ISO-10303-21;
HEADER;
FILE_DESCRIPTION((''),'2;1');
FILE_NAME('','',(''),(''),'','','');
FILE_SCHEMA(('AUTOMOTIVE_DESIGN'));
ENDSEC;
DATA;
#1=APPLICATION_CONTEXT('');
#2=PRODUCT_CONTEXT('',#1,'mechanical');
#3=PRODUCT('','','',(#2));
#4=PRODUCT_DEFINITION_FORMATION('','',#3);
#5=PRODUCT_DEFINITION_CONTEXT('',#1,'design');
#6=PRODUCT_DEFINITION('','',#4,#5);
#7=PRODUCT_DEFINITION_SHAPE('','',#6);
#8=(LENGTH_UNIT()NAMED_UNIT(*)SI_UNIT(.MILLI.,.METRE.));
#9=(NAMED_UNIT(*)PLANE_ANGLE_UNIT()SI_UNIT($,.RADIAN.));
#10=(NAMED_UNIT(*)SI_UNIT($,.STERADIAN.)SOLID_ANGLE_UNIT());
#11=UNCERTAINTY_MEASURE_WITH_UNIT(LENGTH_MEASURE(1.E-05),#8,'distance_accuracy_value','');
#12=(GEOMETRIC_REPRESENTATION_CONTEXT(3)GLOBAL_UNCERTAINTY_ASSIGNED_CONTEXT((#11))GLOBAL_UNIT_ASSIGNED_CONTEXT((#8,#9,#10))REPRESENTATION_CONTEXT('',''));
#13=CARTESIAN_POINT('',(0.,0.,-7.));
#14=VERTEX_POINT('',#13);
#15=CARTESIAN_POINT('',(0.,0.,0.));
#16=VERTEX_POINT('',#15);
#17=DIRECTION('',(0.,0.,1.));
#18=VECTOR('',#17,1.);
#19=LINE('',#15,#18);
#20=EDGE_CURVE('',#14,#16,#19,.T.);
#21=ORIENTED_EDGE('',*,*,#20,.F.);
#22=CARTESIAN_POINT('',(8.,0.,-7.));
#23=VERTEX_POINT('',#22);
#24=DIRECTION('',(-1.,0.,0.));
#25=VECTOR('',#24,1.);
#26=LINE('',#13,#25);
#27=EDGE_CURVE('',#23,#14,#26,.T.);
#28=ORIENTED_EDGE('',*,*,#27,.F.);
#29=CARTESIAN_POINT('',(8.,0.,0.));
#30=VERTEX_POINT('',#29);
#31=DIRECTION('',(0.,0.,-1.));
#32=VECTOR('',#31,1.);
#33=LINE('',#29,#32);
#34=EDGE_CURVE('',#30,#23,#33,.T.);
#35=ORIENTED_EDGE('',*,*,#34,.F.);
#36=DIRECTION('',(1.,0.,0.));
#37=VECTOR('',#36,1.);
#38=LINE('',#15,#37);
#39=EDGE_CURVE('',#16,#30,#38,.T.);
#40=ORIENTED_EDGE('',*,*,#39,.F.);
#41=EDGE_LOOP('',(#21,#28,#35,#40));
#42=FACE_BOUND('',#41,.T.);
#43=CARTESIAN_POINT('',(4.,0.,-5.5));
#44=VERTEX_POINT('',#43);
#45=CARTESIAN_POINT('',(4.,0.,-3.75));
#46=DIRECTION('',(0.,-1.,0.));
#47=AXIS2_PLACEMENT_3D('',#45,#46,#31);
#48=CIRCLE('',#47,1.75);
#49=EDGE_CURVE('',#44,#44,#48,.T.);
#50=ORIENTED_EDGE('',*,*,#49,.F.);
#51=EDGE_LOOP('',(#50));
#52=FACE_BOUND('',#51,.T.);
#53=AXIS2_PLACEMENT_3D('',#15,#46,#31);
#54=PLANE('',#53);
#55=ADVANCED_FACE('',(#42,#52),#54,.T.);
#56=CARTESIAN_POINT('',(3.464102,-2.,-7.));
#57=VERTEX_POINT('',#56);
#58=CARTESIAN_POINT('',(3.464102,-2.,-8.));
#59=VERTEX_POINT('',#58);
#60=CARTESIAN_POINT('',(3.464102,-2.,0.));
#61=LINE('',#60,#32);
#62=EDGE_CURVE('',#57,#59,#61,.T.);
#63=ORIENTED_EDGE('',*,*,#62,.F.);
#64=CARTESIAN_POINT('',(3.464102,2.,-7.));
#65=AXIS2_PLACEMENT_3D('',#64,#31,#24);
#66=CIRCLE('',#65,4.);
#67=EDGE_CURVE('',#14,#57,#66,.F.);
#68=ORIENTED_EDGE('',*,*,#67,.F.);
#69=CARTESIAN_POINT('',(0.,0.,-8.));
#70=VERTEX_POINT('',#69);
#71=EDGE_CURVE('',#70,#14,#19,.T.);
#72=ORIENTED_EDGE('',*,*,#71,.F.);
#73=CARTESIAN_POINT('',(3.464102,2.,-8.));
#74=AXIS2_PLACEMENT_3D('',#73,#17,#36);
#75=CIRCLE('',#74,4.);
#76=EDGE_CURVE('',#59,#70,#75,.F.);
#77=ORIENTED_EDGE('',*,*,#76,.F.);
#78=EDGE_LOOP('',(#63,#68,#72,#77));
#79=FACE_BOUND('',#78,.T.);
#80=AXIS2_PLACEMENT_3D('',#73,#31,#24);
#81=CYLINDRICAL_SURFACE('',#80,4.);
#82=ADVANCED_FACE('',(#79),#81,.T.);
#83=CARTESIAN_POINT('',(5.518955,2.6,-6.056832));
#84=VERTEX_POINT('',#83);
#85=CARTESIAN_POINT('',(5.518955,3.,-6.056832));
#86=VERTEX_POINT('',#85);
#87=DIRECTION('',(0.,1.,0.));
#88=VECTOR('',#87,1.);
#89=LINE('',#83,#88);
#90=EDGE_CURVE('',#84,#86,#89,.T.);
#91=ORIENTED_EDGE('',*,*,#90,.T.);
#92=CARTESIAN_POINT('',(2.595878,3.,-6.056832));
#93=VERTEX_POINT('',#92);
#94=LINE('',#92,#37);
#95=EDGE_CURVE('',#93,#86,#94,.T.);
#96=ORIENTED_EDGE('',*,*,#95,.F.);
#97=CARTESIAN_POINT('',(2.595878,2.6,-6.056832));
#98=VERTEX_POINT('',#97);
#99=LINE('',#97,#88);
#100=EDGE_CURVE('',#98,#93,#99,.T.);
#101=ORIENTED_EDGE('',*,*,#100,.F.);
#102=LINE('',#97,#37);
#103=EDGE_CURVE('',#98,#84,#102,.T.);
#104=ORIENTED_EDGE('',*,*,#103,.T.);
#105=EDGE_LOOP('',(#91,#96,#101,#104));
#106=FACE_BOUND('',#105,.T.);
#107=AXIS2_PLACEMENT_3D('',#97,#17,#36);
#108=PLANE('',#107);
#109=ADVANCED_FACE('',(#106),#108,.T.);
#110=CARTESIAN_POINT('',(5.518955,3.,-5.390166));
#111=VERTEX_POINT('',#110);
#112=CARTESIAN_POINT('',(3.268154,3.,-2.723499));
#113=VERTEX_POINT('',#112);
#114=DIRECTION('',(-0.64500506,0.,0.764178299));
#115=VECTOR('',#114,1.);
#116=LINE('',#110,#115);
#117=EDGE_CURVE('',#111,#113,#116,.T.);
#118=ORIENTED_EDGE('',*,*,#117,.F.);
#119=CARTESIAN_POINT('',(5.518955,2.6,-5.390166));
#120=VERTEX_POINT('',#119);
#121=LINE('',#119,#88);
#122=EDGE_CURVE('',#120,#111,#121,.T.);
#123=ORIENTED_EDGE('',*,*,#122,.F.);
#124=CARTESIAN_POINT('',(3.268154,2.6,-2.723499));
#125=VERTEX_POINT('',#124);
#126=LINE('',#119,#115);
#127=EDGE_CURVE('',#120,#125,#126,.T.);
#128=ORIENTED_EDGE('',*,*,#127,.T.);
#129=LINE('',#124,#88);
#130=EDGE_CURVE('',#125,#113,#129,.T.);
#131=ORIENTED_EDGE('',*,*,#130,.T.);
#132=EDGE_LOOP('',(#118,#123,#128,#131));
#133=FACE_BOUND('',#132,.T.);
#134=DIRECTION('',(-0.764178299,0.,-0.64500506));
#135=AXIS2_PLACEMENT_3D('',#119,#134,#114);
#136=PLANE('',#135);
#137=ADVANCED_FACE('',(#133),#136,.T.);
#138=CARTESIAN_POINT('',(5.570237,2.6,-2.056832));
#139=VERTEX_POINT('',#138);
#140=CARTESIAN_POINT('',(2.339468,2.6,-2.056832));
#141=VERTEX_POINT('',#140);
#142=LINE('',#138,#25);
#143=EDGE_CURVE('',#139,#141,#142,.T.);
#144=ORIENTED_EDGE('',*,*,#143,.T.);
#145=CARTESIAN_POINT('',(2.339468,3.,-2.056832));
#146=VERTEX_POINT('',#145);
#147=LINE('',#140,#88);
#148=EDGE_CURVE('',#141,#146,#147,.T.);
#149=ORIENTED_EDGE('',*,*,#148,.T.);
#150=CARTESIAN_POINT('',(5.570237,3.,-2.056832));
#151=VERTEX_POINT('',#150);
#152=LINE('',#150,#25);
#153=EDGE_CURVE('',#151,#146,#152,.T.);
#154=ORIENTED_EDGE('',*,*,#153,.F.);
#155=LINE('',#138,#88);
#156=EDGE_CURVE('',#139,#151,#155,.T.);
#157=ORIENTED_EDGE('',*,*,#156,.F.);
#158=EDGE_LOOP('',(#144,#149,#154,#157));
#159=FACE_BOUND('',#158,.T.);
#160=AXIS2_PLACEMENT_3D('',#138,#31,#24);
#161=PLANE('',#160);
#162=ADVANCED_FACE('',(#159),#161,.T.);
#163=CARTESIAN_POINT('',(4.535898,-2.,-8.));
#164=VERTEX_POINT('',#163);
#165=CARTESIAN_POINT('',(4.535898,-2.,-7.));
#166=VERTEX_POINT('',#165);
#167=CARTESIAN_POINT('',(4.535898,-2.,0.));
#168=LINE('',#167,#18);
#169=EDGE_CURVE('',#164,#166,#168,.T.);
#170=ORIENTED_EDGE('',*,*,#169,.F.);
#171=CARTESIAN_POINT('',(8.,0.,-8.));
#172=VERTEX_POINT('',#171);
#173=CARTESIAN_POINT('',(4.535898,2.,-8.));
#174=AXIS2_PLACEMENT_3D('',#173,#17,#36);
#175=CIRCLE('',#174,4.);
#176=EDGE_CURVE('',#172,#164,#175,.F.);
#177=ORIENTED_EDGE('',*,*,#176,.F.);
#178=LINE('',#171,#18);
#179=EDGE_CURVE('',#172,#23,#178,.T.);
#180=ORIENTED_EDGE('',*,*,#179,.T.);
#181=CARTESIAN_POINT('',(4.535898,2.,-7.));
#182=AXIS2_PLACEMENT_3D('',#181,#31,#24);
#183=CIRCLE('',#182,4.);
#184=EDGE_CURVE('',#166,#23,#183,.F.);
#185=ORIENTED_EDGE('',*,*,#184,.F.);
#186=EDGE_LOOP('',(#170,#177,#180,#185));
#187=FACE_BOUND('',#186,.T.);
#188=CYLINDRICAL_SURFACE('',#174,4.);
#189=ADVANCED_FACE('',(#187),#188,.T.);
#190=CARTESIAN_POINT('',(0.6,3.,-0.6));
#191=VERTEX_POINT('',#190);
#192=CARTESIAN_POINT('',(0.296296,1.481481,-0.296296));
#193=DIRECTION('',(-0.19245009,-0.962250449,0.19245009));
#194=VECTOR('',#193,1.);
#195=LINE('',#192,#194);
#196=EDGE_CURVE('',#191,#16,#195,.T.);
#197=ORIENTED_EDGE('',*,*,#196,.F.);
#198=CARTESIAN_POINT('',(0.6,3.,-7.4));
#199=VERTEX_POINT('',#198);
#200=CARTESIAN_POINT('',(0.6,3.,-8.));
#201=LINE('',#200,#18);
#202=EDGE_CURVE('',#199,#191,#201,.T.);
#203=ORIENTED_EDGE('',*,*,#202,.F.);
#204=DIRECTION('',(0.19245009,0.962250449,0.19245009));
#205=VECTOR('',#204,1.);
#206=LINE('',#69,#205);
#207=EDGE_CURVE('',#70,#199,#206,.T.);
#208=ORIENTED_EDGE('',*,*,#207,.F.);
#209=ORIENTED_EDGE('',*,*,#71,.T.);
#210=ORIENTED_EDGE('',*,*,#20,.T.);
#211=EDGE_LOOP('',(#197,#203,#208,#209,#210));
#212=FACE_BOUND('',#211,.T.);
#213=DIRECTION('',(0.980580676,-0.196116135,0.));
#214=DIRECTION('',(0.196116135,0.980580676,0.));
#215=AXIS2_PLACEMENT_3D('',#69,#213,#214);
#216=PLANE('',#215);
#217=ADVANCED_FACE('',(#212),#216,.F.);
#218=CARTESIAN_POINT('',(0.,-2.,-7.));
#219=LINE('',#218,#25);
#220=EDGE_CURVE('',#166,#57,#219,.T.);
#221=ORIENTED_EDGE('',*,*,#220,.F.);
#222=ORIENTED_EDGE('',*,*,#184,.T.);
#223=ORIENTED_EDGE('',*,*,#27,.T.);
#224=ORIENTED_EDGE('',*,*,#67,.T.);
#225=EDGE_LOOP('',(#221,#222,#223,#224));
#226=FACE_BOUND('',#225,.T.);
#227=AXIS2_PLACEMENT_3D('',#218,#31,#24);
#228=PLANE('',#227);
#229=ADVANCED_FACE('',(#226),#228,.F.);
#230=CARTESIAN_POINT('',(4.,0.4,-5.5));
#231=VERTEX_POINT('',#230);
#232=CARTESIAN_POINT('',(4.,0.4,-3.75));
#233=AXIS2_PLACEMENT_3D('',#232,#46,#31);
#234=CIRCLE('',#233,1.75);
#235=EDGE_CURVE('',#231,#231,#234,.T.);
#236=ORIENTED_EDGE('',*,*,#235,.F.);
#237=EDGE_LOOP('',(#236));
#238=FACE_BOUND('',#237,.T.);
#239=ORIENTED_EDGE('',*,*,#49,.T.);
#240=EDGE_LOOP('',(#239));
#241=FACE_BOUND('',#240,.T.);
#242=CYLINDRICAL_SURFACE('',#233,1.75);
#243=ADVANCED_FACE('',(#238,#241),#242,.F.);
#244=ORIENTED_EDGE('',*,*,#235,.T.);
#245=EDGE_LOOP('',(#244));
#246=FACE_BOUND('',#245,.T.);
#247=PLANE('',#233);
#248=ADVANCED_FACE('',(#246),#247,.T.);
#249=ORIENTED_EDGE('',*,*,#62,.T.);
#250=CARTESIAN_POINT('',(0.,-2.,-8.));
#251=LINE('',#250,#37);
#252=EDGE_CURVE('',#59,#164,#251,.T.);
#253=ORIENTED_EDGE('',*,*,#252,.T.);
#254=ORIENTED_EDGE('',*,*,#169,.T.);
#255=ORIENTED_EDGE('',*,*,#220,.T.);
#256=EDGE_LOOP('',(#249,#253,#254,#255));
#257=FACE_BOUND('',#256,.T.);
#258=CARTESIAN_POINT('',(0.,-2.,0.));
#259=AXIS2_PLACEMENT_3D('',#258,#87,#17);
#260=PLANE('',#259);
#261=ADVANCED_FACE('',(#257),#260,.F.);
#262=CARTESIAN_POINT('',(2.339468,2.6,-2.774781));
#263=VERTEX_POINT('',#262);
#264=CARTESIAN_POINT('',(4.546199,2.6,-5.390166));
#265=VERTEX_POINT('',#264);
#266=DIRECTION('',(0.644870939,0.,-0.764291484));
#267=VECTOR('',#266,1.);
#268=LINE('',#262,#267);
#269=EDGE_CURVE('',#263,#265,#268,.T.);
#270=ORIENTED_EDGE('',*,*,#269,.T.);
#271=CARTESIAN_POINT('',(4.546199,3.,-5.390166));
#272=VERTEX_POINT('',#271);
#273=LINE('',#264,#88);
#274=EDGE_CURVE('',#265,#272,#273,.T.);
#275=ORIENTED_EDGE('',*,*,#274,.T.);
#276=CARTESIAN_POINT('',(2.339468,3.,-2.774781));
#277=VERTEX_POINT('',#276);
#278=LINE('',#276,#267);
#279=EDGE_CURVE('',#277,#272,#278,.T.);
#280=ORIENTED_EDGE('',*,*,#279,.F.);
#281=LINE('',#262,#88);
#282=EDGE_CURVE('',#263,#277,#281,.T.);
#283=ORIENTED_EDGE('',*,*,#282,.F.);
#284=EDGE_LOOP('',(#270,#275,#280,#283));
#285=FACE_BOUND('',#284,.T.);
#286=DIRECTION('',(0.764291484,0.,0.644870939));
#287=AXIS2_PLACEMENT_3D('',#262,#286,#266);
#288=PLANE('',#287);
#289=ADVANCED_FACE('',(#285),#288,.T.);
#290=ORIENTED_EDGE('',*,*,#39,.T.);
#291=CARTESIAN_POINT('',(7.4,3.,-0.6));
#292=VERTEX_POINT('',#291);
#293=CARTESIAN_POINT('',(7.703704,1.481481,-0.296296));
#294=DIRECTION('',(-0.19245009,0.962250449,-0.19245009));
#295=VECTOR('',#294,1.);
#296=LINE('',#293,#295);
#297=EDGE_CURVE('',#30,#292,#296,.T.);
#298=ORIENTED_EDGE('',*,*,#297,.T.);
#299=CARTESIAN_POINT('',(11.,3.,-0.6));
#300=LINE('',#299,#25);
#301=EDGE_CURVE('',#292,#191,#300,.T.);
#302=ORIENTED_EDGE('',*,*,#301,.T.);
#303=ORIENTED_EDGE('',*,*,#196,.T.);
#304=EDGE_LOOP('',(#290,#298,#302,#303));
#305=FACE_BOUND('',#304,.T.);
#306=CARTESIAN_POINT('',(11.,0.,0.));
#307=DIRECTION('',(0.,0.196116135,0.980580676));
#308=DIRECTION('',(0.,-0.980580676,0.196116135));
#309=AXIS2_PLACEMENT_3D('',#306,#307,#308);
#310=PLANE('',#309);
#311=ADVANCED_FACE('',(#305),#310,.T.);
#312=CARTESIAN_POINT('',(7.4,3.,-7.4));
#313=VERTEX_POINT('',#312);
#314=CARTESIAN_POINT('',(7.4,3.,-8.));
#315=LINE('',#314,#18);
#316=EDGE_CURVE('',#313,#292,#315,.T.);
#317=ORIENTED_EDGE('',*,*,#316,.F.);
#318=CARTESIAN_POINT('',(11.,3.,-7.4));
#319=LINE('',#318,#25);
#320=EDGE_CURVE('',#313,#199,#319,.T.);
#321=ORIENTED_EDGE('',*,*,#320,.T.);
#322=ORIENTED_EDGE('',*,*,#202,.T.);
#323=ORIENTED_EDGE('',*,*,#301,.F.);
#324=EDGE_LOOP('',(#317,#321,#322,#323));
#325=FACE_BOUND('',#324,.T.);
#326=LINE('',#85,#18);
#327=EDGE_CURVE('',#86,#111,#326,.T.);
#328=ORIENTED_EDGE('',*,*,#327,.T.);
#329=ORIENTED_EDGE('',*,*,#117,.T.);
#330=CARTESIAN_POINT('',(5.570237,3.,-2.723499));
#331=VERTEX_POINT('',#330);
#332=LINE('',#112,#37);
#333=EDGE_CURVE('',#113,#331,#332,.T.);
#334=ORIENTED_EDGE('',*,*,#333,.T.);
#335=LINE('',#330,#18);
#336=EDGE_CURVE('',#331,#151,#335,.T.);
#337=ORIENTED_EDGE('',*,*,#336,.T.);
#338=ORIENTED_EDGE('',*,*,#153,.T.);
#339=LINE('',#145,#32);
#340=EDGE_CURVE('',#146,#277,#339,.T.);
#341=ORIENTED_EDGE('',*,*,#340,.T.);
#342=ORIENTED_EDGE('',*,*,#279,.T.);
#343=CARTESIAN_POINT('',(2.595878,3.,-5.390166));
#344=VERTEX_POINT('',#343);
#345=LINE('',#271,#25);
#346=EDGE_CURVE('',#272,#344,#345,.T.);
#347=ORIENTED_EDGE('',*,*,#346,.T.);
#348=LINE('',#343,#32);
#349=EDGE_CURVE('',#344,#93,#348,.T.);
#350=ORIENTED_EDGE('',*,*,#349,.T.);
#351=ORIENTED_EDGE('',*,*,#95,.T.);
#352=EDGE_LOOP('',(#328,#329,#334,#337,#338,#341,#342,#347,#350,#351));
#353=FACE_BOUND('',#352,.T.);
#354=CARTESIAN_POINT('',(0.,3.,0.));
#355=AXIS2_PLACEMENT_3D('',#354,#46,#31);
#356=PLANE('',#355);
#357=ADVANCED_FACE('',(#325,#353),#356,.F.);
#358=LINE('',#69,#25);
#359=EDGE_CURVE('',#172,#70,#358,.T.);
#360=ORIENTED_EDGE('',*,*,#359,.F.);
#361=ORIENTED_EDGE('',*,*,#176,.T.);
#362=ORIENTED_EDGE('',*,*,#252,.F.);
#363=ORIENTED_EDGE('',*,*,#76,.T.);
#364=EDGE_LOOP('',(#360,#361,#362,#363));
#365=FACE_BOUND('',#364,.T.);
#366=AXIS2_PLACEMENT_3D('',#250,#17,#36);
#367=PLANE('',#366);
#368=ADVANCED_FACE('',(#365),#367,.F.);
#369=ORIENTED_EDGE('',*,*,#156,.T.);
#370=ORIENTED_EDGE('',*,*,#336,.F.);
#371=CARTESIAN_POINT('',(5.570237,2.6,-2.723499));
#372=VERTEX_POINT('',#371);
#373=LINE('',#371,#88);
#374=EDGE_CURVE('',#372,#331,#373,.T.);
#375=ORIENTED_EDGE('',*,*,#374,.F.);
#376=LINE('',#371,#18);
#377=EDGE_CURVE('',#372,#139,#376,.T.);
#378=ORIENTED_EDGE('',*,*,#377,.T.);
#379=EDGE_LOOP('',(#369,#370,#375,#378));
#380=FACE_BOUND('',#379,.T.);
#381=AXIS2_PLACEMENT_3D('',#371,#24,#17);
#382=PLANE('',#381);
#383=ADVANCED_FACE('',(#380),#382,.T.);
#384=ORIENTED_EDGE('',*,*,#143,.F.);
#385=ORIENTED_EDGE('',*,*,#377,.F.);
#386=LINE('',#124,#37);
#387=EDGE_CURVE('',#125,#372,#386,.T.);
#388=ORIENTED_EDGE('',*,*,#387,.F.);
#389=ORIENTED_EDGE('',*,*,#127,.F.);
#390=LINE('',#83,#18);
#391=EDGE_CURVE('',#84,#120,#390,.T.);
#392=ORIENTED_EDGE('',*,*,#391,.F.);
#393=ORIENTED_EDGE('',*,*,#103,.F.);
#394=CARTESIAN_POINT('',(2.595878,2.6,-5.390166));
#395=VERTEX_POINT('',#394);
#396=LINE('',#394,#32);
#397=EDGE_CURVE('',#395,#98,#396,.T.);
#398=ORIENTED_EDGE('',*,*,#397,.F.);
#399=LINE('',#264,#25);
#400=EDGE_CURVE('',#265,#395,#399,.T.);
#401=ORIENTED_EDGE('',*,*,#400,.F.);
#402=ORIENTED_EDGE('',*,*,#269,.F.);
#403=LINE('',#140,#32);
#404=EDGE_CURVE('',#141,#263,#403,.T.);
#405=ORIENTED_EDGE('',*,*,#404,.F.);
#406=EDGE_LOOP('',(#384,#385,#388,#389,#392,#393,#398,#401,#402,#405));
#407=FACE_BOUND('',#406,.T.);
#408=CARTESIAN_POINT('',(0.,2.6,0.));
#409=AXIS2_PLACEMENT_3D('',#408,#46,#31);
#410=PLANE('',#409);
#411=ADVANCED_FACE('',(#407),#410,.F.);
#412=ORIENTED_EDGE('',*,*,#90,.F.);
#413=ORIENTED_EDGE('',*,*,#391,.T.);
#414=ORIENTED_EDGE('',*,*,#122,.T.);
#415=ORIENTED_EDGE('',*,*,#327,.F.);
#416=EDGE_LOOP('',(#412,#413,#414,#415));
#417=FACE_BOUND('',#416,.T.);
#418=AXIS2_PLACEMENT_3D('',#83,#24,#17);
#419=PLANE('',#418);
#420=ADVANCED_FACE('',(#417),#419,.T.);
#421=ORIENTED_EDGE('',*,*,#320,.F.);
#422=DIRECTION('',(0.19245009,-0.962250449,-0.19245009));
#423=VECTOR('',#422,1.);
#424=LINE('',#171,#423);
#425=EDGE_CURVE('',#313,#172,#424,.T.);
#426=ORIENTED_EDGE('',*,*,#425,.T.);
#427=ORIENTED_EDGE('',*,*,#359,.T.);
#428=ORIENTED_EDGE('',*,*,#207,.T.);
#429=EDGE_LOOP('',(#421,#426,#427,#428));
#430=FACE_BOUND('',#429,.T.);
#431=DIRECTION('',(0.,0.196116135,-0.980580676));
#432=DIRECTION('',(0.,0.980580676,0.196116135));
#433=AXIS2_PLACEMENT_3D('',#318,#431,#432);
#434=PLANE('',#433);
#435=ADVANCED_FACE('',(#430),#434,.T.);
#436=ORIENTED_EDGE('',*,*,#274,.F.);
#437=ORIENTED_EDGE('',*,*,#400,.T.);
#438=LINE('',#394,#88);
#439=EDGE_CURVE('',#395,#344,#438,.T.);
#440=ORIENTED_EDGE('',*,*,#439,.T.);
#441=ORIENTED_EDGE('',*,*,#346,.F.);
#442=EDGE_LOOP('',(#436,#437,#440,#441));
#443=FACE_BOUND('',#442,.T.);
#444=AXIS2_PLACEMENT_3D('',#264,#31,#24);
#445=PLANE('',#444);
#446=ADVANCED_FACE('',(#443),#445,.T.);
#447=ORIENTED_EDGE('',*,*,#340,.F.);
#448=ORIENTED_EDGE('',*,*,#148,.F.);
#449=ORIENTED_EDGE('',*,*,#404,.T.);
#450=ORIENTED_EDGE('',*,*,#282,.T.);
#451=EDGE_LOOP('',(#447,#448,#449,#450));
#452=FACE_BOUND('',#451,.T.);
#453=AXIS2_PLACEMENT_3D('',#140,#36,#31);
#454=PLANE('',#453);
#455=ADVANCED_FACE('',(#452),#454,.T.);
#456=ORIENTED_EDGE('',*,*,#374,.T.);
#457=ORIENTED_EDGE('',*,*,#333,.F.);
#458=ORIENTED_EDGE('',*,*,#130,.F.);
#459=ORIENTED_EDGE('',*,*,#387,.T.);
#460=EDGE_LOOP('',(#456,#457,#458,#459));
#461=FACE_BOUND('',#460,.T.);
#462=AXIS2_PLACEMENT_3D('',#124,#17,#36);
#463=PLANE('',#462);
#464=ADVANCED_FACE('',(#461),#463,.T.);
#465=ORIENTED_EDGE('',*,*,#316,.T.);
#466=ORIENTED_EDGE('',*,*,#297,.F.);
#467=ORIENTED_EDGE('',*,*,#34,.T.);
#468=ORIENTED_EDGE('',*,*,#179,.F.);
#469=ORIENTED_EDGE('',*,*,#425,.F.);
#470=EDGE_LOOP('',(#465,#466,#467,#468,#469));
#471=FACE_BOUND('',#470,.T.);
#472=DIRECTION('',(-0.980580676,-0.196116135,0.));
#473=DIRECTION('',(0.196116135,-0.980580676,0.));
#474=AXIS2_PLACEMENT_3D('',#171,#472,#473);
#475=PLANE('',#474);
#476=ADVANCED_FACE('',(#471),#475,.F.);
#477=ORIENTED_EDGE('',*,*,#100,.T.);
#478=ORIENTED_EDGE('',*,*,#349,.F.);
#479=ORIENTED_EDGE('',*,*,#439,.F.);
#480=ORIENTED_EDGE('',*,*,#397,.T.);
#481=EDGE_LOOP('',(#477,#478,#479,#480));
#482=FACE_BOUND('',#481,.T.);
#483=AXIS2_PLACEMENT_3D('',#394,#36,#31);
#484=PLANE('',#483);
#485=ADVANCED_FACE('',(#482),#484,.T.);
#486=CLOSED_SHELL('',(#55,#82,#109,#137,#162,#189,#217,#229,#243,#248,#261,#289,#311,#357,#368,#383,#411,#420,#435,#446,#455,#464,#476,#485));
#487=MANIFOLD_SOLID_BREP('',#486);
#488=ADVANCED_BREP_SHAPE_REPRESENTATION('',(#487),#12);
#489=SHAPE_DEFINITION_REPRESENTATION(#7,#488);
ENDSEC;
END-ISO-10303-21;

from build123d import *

# Parameters (mm, degrees)
SKETCH1_W               = 8
SKETCH1_H               = 8
BOSS_EXTRUDE1_DEPTH     = 3
CUT_EXTRUDE1_DEPTH      = 12.704699911
CUT_EXTRUDE1_DEPTH_BACK = 12.704699911
CUT_EXTRUDE2_DEPTH      = 11
SKETCH4_R               = 1.75
CUT_EXTRUDE3_DEPTH      = 0.4
SKETCH5_W               = 8
SKETCH5_H               = 1
BOSS_EXTRUDE2_DEPTH     = 2
FILLET1_R               = 4
CUT_EXTRUDE4_DEPTH      = 0.4


with BuildPart() as part:
    # Sketch1 → Boss-Extrude1 (new body)
    with BuildSketch(Plane(origin=(0, 0, 0), x_dir=(1, 0, 0), z_dir=(0, 1, 0))):
        with Locations((4, 4)):
            Rectangle(SKETCH1_W, SKETCH1_H)
    extrude(amount=BOSS_EXTRUDE1_DEPTH)

    # Sketch2 → Cut-Extrude1 (cut, two sides: drawn at the far end of the back side and taken through both)
    with BuildSketch(Plane.XY.offset(-CUT_EXTRUDE1_DEPTH_BACK)):
        Polygon((0, 0), (0.6, 3), (0, 3), align=None)
        Polygon((8, 0), (7.4, 3), (8, 3), align=None)
    extrude(amount=CUT_EXTRUDE1_DEPTH + CUT_EXTRUDE1_DEPTH_BACK, mode=Mode.SUBTRACT)

    # Sketch3 → Cut-Extrude2 (cut)
    with BuildSketch(Plane(origin=(0, 0, 0), x_dir=(0, 0, -1), z_dir=(1, 0, 0))):
        Polygon((0, 0), (0.6, 3), (0, 3), align=None)
        Polygon((8, 3), (7.4, 3), (8, 0), align=None)
    extrude(amount=CUT_EXTRUDE2_DEPTH, mode=Mode.SUBTRACT)

    # Sketch4 → Cut-Extrude3 (cut)
    with BuildSketch(Plane.XZ):
        with Locations(Location((4, -3.75, 0), (0, 0, 270))):
            Circle(SKETCH4_R)
    extrude(amount=-CUT_EXTRUDE3_DEPTH, mode=Mode.SUBTRACT)

    # Sketch5 → Boss-Extrude2 (add)
    with BuildSketch(Plane.XZ):
        with Locations((4, -7.5)):
            Rectangle(SKETCH5_W, SKETCH5_H)
    extrude(amount=BOSS_EXTRUDE2_DEPTH)

    # Fillet1
    # the kernel refuses this fillet: 4 mm, written as the material it takes off along each edge
    with BuildSketch(Plane(origin=(8, -2, -16.660254038), x_dir=(0, 1, 0), z_dir=(0, 0, 1)), Plane(origin=(0, -2, 1.660254038), x_dir=(0, 1, 0), z_dir=(0, 0, -1))) as fillet1_piece_1:
        with BuildLine():
            CenterArc((4, 3.464101615), FILLET1_R, 180, 60)
            Line((0, 3.464101615), (-0.08, 3.464101615))
            Line((-0.08, 3.464101615), (-0.08, 0))
            Line((-0.08, 0), (0, -0.08))
            ThreePointArc((0, -0.08), (1, -0.08), (1.96, -0.069282032))
            Line((1.96, -0.069282032), (2, 0))
        make_face()
    extrude(amount=18.320508076, mode=Mode.SUBTRACT)

    # Sketch6 → Cut-Extrude4 (cut)
    with BuildSketch(Plane(origin=(0, 3, 0), x_dir=(1, 0, 0), z_dir=(0, 1, 0))):
        Polygon((2.33946821, 2.056832464), (2.33946821, 2.774781182), (4.546198979, 5.390165797), (2.595878466, 5.390165797), (2.595878466, 6.056832464), (5.518955389, 6.056832464), (5.518955389, 5.390165797), (3.268154107, 2.72349913), (5.570237441, 2.72349913), (5.570237441, 2.056832464), align=None)
    extrude(amount=-CUT_EXTRUDE4_DEPTH, mode=Mode.SUBTRACT)


solid = part.part
